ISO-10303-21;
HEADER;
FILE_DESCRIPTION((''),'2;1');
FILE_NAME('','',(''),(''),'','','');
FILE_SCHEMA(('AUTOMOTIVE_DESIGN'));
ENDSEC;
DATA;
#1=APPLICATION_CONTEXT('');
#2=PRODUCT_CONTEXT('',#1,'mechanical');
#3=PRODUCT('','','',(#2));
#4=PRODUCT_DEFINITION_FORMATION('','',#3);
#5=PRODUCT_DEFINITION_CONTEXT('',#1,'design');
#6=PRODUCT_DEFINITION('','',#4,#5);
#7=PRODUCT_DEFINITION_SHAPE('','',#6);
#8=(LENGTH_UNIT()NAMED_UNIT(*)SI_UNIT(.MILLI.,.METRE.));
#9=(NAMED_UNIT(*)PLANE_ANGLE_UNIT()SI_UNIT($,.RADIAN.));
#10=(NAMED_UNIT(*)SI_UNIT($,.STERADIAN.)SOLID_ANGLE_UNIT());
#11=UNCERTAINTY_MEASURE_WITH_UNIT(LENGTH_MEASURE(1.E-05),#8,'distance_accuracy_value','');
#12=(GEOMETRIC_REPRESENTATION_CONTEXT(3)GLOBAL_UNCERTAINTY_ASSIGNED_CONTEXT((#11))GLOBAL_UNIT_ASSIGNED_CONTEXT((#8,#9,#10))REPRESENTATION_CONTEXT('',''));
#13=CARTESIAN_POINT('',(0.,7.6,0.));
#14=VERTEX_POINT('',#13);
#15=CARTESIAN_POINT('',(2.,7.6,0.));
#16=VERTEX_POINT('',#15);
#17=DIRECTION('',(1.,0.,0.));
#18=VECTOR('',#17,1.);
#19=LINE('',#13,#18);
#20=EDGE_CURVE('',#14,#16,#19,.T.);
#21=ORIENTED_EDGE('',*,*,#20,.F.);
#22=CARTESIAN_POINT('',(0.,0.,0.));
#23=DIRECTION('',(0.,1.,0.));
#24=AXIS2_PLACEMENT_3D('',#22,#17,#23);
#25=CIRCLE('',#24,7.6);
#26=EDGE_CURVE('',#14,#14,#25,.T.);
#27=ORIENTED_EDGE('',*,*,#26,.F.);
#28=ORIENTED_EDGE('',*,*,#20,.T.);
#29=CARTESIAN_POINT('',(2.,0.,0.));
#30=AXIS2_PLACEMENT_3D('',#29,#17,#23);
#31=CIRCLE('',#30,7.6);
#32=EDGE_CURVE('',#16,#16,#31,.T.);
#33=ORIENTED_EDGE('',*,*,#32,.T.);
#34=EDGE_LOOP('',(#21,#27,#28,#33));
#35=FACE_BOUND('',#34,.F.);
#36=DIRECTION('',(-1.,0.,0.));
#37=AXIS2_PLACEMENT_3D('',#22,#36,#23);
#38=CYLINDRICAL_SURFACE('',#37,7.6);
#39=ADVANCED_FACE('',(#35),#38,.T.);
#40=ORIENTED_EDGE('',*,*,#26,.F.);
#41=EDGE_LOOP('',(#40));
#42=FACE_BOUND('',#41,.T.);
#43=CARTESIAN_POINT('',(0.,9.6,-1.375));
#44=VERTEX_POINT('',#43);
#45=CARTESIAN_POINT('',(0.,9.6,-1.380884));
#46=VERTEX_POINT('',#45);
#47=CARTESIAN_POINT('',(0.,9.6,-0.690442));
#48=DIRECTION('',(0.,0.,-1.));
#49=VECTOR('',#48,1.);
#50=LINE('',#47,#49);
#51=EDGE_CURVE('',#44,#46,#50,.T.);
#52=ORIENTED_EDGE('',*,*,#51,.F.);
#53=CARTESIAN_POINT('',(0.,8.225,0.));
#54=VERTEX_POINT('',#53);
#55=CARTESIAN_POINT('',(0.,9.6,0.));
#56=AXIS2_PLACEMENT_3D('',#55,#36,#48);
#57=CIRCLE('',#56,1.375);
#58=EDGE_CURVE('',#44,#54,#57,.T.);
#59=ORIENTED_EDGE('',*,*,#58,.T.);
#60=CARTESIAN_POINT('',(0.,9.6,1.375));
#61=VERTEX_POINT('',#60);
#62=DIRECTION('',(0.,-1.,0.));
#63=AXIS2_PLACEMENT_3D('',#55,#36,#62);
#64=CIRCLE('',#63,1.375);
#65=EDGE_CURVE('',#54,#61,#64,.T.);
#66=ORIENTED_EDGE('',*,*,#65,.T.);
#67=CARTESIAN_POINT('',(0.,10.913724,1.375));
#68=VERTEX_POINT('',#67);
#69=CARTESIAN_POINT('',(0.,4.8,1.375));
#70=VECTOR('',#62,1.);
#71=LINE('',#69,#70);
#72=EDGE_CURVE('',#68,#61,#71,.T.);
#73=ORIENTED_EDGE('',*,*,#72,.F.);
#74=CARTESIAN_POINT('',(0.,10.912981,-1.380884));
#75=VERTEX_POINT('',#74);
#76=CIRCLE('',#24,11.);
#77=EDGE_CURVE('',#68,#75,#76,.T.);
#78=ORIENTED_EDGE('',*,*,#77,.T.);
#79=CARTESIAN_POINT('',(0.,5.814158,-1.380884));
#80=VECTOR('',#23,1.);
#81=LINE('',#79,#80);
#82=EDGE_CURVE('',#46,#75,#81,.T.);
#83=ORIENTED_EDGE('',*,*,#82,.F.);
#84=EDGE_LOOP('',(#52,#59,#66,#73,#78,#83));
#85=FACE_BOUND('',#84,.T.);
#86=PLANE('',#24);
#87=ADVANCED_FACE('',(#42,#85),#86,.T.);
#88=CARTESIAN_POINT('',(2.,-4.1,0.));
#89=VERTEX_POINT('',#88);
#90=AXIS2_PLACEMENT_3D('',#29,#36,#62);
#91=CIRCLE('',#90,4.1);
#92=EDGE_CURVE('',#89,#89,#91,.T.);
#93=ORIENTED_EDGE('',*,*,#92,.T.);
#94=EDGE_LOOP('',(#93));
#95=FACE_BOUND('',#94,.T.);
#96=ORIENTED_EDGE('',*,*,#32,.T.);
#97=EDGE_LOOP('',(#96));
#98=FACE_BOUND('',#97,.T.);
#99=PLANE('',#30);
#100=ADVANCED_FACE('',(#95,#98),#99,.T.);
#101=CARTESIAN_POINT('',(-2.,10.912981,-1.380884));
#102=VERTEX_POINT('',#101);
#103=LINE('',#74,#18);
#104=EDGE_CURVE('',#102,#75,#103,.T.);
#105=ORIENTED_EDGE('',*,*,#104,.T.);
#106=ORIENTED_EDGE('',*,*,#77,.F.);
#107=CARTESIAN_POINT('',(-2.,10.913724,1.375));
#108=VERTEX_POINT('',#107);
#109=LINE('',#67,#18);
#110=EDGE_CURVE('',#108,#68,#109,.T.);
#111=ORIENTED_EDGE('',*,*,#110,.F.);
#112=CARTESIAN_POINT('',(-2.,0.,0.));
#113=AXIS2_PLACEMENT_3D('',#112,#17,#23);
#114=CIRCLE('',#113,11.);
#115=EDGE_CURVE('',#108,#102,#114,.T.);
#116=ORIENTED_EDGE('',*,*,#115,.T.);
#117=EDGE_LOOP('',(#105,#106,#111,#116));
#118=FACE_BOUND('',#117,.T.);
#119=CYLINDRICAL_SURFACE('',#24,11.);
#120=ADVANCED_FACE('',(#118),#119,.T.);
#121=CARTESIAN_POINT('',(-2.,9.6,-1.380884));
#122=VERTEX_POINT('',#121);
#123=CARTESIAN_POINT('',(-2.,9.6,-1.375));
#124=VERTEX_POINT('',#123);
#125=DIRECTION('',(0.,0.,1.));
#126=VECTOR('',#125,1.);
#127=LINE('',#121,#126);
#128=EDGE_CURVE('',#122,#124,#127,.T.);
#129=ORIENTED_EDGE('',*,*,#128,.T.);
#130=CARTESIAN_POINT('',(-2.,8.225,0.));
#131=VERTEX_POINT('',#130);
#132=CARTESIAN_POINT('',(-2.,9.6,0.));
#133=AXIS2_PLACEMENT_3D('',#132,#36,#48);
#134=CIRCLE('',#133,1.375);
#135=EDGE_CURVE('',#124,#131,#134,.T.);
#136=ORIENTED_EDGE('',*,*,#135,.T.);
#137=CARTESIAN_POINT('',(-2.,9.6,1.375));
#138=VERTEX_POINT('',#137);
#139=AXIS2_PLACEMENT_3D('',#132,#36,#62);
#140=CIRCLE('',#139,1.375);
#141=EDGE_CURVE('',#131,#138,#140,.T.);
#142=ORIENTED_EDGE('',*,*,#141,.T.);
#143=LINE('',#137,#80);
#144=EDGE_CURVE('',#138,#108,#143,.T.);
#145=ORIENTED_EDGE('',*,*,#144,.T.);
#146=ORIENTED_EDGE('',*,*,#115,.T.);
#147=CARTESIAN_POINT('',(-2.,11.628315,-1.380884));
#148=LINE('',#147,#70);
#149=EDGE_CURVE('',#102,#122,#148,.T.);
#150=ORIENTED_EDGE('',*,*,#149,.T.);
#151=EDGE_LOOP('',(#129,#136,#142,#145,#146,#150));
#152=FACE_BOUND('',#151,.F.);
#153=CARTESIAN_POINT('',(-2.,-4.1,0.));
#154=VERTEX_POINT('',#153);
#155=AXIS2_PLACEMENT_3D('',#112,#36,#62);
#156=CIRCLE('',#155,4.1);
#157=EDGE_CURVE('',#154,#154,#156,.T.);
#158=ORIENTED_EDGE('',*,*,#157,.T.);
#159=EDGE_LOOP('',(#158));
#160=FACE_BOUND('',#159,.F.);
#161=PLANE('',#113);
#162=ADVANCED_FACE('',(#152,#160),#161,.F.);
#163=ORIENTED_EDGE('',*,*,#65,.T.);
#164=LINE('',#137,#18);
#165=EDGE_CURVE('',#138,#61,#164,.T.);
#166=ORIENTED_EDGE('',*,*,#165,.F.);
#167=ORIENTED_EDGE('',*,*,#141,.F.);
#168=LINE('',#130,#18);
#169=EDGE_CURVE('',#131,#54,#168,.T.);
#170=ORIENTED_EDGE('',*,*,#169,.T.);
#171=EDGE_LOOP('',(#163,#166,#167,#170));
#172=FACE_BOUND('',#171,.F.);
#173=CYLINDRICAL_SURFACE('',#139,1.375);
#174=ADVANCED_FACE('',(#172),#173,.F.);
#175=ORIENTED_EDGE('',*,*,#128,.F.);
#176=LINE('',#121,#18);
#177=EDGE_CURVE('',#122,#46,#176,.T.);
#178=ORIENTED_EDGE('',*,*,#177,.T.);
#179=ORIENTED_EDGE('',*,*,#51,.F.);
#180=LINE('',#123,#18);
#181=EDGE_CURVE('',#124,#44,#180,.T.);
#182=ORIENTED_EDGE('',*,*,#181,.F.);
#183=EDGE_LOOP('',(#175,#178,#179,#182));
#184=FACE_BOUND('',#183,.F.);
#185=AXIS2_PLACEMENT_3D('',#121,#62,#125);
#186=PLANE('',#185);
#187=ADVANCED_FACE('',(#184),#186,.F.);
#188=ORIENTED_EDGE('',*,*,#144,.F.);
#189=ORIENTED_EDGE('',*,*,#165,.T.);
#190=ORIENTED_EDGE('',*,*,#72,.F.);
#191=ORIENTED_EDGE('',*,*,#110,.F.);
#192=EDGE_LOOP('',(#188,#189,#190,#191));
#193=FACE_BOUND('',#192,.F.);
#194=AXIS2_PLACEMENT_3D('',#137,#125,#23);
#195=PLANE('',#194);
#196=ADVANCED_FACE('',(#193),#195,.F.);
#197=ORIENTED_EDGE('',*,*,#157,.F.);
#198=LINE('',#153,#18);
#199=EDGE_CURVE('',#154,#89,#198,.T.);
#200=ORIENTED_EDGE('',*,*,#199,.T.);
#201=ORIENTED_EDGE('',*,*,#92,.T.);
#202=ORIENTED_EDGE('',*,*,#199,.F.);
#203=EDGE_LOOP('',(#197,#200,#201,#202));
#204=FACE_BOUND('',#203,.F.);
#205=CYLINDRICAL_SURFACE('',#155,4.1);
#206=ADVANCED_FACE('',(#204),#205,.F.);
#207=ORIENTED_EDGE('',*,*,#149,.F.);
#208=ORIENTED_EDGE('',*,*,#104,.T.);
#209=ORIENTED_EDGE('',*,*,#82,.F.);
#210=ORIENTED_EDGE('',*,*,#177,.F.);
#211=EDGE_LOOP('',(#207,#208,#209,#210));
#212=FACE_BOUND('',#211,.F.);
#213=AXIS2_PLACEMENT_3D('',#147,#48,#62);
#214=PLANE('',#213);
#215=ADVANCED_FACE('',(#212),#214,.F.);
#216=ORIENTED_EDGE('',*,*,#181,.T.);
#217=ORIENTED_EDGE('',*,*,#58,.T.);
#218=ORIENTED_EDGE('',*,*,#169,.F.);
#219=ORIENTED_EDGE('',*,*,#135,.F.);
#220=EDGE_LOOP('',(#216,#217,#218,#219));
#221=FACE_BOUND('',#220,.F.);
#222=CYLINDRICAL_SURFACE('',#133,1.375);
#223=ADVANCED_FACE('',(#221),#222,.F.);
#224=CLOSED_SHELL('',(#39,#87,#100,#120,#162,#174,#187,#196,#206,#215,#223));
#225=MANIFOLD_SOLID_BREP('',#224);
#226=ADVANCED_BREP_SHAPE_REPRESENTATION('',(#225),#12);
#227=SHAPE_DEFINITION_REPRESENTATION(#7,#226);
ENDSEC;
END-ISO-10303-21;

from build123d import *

# Parameters (mm, degrees)
F0_R     = 11
F0_R_2   = 7.6
F1_DEPTH = 2
F2_DEPTH = 2
F3_R     = 4.1
F4_DEPTH = 25
F6_DEPTH = 5


# Not quite as in the source:
# - a feature names something its author has since deleted; it is built from what else it names


with BuildPart() as f1:
    # F0 (on Right) → F1 (new body)
    with BuildSketch(Plane.YZ):
        Circle(F0_R)
        Circle(F0_R_2, mode=Mode.SUBTRACT)
        Circle(F0_R_2)
    extrude(amount=-F1_DEPTH)

    # F0 (on Right) → F2 (join)
    with BuildSketch(Plane.YZ):
        Circle(F0_R_2)
    extrude(amount=F2_DEPTH)

    # F3 (on face) → F4 (cut)
    with BuildSketch(Plane(origin=(-2, 0, 0), x_dir=(0, -1, 0), z_dir=(-1, 0, 0))):
        Circle(F3_R)
    extrude(amount=-F4_DEPTH, mode=Mode.SUBTRACT)

    # F5 (on face) → F6 (cut)
    with BuildSketch(Plane(origin=(-2, 0, 0), x_dir=(0, -1, 0), z_dir=(-1, 0, 0))):
        with BuildLine():
            ThreePointArc((-10.9129812948, -1.3808835065), (-10.9999996004, -0.0029651094), (-10.9137241581, 1.375))
            Line((-10.9137241581, 1.375), (-11.6283151001, 1.375))
            Line((-11.6283151001, 1.375), (-11.6283151001, -1.3808835065))
            Line((-11.6283151001, -1.3808835065), (-10.9129812948, -1.3808835065))
        make_face()
        with BuildLine():
            Line((-9.6, -1.375), (-9.6, 1.375))
            ThreePointArc((-9.6, 1.375), (-10.975, 0), (-9.6, -1.375))
        make_face()
        with BuildLine():
            ThreePointArc((-9.6, -1.375), (-10.975, 0), (-9.6, 1.375))
            Line((-9.6, 1.375), (-10.9137241581, 1.375))
            ThreePointArc((-10.9137241581, 1.375), (-10.9999996004, -0.0029651094), (-10.9129812948, -1.3808835065))
            Line((-10.9129812948, -1.3808835065), (-9.6, -1.3808835065))
            Line((-9.6, -1.3808835065), (-9.6, -1.375))
        make_face()
        with BuildLine():
            ThreePointArc((-9.6, -1.375), (-8.6277281759, -0.9722718241), (-8.225, 0))
            ThreePointArc((-8.225, 0), (-8.6277281759, 0.9722718241), (-9.6, 1.375))
            Line((-9.6, 1.375), (-9.6, -1.375))
        make_face()
    extrude(amount=-F6_DEPTH, mode=Mode.SUBTRACT)


solid = f1.part
